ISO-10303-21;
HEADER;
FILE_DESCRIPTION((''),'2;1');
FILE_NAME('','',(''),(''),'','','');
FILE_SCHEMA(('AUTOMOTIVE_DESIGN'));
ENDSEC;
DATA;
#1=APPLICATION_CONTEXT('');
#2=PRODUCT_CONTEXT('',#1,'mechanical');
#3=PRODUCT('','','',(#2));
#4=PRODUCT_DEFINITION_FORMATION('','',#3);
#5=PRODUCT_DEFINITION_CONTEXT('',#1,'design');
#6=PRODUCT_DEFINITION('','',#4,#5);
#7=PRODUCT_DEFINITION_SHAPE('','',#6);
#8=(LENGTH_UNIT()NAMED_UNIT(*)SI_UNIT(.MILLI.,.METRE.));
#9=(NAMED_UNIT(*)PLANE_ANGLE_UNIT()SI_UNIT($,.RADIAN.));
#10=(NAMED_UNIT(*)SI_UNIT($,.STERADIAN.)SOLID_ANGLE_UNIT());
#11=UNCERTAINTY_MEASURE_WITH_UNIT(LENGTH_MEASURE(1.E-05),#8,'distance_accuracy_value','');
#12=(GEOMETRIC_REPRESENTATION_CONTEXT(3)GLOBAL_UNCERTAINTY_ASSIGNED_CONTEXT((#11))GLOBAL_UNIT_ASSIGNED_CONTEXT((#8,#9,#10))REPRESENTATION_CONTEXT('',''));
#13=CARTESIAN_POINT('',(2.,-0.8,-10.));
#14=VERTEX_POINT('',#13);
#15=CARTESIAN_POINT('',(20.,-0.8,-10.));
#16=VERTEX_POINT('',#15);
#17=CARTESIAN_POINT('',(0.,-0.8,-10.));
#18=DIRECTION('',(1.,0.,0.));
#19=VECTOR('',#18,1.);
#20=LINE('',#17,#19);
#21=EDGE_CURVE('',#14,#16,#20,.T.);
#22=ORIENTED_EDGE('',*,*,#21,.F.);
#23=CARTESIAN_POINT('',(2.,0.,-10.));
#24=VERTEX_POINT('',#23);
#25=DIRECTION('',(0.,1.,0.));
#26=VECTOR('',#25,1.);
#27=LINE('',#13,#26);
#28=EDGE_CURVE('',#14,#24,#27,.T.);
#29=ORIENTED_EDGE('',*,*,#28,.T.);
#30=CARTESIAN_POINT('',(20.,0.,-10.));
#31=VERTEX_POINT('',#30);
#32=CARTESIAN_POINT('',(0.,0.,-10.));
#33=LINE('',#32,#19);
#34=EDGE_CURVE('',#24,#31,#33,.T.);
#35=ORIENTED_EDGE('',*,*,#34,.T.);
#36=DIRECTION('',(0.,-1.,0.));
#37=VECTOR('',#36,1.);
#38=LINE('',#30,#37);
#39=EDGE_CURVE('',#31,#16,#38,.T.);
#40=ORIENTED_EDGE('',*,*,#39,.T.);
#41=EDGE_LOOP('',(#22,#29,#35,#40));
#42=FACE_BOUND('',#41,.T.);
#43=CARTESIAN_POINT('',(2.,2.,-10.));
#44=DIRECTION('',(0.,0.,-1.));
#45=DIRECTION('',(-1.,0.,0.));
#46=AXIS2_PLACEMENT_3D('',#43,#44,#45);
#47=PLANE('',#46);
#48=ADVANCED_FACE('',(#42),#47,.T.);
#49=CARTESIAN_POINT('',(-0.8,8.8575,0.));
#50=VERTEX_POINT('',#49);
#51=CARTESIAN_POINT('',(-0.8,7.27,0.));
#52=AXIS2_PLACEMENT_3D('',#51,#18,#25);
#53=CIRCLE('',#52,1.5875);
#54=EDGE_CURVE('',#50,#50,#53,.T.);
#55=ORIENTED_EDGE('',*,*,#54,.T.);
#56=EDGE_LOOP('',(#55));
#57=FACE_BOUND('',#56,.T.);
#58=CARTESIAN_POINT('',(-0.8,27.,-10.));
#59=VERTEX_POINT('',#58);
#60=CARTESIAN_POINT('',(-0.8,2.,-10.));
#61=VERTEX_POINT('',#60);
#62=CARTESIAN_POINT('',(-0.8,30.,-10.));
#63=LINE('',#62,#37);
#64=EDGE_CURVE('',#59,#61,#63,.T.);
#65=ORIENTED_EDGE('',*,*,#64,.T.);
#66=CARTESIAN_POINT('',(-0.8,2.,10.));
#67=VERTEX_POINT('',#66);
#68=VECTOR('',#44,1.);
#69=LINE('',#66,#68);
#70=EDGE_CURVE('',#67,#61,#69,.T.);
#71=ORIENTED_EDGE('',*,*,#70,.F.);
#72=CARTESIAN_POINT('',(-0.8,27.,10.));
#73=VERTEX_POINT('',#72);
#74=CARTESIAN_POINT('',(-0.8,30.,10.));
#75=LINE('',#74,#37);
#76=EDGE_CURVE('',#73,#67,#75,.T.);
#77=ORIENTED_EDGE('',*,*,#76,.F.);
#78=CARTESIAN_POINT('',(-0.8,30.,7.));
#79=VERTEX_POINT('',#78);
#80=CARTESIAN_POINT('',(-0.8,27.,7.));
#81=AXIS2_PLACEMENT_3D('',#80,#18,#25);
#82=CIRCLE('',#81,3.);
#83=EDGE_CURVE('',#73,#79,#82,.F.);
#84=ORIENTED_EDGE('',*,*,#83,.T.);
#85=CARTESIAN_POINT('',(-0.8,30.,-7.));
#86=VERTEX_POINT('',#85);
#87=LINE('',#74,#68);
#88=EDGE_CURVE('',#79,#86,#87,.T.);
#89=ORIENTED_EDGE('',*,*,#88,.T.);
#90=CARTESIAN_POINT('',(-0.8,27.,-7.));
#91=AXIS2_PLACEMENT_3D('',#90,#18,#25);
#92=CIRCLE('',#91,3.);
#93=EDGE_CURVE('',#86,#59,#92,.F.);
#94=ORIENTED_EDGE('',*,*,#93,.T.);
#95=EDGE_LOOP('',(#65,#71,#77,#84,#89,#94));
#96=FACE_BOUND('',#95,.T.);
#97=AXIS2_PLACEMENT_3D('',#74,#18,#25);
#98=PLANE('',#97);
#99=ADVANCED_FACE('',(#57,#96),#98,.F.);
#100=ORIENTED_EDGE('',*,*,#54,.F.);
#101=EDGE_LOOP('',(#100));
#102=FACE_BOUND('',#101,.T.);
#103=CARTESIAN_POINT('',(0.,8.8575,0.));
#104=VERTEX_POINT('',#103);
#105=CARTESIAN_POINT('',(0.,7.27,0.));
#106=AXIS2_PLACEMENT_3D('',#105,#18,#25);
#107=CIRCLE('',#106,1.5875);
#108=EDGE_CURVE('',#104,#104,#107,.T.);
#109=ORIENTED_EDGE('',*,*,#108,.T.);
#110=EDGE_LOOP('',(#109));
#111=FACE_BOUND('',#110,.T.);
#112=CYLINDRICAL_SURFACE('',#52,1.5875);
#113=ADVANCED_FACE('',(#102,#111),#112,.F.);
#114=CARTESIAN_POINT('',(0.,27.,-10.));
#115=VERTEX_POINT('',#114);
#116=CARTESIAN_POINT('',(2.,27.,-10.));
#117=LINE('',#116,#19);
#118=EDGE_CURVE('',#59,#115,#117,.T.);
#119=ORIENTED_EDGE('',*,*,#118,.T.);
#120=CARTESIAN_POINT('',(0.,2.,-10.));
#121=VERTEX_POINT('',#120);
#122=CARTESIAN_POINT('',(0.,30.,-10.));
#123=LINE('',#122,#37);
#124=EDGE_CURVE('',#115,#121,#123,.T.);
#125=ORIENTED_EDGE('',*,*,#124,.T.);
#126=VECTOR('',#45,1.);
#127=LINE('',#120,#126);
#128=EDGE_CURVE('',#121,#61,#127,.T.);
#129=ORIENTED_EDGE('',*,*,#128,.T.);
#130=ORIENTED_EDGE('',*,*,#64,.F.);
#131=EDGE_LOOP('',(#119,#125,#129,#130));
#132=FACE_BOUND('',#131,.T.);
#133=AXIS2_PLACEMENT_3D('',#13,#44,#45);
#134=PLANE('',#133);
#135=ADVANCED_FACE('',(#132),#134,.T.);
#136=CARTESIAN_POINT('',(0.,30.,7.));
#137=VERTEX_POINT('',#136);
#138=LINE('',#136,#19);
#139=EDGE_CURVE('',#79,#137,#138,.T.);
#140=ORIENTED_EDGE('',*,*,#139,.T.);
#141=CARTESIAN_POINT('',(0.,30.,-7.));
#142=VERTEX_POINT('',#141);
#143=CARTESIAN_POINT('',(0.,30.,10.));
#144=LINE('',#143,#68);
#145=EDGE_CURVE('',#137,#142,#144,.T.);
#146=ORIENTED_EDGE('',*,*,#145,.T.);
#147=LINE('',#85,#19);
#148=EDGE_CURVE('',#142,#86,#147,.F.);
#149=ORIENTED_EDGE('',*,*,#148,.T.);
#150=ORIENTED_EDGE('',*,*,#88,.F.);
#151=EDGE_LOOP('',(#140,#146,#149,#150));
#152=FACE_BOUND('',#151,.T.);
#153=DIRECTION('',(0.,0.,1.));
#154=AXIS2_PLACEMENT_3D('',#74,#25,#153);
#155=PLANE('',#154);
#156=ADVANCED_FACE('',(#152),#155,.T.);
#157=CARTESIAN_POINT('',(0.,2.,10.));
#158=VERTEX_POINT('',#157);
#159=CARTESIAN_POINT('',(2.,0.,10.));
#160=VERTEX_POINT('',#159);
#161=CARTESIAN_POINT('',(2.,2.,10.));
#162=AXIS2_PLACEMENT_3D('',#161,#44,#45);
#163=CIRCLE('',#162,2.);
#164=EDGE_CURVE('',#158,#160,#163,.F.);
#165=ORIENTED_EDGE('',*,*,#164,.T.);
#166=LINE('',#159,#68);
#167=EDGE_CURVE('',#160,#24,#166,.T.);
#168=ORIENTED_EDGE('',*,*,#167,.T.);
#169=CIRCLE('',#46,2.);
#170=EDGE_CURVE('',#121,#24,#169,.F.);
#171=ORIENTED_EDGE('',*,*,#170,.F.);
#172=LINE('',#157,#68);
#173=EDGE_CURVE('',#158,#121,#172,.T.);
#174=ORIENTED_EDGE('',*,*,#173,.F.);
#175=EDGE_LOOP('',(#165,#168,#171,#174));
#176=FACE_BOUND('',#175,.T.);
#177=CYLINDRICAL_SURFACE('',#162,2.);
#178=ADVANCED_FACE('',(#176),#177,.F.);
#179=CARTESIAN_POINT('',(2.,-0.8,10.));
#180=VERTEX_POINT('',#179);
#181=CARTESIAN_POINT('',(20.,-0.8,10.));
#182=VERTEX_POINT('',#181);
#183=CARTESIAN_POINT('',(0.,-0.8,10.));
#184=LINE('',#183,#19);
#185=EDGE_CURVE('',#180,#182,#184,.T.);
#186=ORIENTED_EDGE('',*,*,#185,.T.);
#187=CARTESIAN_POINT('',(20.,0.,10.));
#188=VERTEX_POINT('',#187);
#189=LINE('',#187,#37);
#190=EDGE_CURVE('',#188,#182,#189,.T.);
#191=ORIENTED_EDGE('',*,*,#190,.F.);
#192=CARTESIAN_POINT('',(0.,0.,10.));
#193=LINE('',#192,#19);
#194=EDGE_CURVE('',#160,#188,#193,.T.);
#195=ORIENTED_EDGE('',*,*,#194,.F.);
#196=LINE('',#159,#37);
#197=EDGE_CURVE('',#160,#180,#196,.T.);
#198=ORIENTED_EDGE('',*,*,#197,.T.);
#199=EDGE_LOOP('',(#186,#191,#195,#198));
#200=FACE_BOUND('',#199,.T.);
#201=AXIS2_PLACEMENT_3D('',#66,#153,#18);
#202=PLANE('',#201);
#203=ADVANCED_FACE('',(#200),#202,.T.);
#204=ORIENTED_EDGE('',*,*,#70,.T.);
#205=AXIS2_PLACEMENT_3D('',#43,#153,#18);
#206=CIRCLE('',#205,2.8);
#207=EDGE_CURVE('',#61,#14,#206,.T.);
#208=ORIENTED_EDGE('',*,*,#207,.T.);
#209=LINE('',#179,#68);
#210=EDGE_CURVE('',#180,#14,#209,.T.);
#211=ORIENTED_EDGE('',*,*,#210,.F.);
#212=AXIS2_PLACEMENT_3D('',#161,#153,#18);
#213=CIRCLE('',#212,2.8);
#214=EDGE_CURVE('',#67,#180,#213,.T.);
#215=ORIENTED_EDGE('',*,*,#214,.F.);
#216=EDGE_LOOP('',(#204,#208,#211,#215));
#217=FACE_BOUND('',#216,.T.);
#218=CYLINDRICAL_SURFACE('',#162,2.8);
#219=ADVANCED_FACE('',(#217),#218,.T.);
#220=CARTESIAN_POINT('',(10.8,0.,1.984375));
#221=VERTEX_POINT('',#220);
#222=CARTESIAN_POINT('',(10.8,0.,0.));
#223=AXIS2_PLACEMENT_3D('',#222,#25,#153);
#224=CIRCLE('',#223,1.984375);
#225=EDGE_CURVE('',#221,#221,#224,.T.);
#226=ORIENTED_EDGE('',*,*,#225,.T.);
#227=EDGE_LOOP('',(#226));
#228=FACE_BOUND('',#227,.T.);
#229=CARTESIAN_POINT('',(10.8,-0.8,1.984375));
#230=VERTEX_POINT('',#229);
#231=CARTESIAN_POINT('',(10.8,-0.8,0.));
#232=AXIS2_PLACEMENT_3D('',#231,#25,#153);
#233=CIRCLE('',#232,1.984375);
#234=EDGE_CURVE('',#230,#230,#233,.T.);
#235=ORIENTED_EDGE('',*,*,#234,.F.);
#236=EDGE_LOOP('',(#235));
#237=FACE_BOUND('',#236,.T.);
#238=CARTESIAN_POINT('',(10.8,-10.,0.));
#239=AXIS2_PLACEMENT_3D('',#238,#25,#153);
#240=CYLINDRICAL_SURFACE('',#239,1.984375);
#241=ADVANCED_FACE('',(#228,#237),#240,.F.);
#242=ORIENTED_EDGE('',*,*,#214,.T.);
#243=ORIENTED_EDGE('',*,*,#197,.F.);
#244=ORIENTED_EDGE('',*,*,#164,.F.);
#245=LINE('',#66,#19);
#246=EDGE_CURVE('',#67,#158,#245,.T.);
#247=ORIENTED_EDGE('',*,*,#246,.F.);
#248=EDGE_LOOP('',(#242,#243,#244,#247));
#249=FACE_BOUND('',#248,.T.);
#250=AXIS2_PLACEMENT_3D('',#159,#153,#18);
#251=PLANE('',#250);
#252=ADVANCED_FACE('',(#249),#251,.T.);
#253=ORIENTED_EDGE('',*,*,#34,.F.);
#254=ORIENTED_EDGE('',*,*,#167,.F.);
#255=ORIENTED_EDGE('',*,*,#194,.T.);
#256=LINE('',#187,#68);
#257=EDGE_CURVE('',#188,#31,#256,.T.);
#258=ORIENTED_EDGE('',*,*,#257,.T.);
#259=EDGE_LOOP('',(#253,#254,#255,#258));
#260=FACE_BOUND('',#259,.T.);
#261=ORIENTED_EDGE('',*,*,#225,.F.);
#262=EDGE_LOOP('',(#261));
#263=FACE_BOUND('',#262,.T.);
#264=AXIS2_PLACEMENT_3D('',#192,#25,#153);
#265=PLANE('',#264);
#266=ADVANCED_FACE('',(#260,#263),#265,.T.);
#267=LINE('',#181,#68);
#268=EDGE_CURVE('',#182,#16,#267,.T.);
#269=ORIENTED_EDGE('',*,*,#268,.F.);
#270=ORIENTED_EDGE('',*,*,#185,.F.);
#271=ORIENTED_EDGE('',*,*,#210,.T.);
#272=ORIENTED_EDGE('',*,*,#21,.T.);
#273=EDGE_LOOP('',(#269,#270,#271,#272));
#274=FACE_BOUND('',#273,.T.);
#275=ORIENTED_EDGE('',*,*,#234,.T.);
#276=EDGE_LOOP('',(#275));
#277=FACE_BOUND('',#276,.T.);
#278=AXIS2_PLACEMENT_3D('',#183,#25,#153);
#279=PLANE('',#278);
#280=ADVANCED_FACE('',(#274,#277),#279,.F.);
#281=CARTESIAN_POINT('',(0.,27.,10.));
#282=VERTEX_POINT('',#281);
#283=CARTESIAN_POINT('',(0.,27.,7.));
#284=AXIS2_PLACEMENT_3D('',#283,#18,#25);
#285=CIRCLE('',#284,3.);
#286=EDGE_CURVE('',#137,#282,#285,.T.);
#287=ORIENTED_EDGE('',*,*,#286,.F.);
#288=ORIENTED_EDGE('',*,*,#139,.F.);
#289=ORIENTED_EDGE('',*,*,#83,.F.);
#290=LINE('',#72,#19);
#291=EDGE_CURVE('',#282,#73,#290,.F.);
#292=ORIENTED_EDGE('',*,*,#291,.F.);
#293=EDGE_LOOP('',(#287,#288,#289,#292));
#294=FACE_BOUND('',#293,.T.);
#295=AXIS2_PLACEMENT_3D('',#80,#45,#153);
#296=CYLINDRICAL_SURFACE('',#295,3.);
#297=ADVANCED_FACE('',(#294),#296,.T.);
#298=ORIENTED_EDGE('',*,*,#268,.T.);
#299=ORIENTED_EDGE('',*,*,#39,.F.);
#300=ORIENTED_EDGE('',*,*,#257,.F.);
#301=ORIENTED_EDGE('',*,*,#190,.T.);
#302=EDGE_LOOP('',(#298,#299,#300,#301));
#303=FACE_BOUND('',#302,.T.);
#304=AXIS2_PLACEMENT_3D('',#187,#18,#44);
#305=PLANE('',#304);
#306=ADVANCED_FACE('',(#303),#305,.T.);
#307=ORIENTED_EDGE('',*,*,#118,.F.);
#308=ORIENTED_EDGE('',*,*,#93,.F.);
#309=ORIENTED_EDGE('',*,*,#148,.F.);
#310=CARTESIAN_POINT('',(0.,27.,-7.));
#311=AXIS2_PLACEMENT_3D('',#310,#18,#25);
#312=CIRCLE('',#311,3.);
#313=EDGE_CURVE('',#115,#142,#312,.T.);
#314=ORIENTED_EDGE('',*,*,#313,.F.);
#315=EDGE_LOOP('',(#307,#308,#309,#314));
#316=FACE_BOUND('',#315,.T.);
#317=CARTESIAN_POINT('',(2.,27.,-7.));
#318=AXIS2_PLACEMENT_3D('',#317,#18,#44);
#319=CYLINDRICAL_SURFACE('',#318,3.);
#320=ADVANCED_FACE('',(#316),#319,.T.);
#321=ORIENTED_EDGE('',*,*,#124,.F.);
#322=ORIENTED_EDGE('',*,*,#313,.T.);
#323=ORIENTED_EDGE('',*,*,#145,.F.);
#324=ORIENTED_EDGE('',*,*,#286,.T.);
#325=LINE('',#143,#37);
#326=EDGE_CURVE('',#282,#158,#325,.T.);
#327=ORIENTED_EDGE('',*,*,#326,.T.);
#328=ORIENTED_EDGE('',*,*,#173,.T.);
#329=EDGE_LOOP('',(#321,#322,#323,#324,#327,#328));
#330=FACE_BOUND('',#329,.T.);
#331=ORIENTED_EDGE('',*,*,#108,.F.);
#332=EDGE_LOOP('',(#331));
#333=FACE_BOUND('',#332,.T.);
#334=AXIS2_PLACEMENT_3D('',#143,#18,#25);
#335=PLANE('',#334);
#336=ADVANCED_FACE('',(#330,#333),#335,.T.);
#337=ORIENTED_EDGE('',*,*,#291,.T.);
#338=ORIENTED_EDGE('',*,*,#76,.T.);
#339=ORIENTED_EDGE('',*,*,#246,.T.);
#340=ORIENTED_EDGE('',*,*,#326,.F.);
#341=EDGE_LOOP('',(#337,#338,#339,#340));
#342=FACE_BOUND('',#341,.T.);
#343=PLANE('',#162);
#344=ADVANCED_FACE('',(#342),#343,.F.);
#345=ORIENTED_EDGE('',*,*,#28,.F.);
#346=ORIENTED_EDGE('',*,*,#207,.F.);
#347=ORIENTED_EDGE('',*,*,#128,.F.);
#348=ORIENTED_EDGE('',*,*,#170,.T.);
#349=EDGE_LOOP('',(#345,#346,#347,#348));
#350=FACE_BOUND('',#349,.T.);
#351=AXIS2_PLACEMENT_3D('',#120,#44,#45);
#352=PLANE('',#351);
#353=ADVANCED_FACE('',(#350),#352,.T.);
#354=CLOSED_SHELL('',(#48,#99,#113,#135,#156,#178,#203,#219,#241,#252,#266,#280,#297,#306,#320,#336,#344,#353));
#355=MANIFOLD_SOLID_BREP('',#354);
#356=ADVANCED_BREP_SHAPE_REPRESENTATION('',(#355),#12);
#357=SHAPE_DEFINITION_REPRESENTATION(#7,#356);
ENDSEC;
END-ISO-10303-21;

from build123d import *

# Parameters (mm, degrees)
BASE_FLANGE1_DEPTH      = 10
BASE_FLANGE1_DEPTH_BACK = 10
SKETCH2_R               = 1.5875
CUT_EXTRUDE1_DEPTH      = 38.416573868
SKETCH3_R               = 1.984375
CUT_EXTRUDE2_DEPTH      = 10
FILLET1_R               = 3


# Sheet-metal steps are written as plain solids
with BuildPart() as part:
    # Sketch1 → Base-Flange1 (new, two sides: drawn at the far end of the back side and taken through both)
    with BuildSketch(Plane.XY.offset(-BASE_FLANGE1_DEPTH_BACK)):
        with BuildLine():
            Line((0, 30), (0, 2))
            ThreePointArc((0, 2), (0.585786438, 0.585786438), (2, 0))
            Line((2, 0), (20, 0))
            Line((20, 0), (20, -0.8))
            Line((20, -0.8), (2, -0.8))
            ThreePointArc((2, -0.8), (0.020101013, 0.020101013), (-0.8, 2))
            Line((-0.8, 2), (-0.8, 30))
            Line((-0.8, 30), (0, 30))
        make_face()
    extrude(amount=BASE_FLANGE1_DEPTH + BASE_FLANGE1_DEPTH_BACK)

    # Sketch2 → Cut-Extrude1 (cut, through all)
    with BuildSketch(Plane(origin=(0, 0, 0), x_dir=(0, 0, -1), z_dir=(1, 0, 0))):
        with Locations(Location((0, 7.27, 0), (0, 0, 90))):
            Circle(SKETCH2_R)
    extrude(amount=-CUT_EXTRUDE1_DEPTH, mode=Mode.SUBTRACT)

    # Sketch3 → Cut-Extrude2 (cut)
    with BuildSketch(Plane(origin=(0, 0, 0), x_dir=(1, 0, 0), z_dir=(0, 1, 0))):
        with Locations(Location((10.8, 0, 0), (0, 0, 270))):
            Circle(SKETCH3_R)
    extrude(amount=-CUT_EXTRUDE2_DEPTH, mode=Mode.SUBTRACT)

    # Fillet1
    fillet1_edges = [part.edges().sort_by_distance(p)[0] for p in [
        (-0.4, 30, 10),
        (-0.4, 30, -10),
    ]]
    fillet(fillet1_edges, radius=FILLET1_R)


solid = part.part
